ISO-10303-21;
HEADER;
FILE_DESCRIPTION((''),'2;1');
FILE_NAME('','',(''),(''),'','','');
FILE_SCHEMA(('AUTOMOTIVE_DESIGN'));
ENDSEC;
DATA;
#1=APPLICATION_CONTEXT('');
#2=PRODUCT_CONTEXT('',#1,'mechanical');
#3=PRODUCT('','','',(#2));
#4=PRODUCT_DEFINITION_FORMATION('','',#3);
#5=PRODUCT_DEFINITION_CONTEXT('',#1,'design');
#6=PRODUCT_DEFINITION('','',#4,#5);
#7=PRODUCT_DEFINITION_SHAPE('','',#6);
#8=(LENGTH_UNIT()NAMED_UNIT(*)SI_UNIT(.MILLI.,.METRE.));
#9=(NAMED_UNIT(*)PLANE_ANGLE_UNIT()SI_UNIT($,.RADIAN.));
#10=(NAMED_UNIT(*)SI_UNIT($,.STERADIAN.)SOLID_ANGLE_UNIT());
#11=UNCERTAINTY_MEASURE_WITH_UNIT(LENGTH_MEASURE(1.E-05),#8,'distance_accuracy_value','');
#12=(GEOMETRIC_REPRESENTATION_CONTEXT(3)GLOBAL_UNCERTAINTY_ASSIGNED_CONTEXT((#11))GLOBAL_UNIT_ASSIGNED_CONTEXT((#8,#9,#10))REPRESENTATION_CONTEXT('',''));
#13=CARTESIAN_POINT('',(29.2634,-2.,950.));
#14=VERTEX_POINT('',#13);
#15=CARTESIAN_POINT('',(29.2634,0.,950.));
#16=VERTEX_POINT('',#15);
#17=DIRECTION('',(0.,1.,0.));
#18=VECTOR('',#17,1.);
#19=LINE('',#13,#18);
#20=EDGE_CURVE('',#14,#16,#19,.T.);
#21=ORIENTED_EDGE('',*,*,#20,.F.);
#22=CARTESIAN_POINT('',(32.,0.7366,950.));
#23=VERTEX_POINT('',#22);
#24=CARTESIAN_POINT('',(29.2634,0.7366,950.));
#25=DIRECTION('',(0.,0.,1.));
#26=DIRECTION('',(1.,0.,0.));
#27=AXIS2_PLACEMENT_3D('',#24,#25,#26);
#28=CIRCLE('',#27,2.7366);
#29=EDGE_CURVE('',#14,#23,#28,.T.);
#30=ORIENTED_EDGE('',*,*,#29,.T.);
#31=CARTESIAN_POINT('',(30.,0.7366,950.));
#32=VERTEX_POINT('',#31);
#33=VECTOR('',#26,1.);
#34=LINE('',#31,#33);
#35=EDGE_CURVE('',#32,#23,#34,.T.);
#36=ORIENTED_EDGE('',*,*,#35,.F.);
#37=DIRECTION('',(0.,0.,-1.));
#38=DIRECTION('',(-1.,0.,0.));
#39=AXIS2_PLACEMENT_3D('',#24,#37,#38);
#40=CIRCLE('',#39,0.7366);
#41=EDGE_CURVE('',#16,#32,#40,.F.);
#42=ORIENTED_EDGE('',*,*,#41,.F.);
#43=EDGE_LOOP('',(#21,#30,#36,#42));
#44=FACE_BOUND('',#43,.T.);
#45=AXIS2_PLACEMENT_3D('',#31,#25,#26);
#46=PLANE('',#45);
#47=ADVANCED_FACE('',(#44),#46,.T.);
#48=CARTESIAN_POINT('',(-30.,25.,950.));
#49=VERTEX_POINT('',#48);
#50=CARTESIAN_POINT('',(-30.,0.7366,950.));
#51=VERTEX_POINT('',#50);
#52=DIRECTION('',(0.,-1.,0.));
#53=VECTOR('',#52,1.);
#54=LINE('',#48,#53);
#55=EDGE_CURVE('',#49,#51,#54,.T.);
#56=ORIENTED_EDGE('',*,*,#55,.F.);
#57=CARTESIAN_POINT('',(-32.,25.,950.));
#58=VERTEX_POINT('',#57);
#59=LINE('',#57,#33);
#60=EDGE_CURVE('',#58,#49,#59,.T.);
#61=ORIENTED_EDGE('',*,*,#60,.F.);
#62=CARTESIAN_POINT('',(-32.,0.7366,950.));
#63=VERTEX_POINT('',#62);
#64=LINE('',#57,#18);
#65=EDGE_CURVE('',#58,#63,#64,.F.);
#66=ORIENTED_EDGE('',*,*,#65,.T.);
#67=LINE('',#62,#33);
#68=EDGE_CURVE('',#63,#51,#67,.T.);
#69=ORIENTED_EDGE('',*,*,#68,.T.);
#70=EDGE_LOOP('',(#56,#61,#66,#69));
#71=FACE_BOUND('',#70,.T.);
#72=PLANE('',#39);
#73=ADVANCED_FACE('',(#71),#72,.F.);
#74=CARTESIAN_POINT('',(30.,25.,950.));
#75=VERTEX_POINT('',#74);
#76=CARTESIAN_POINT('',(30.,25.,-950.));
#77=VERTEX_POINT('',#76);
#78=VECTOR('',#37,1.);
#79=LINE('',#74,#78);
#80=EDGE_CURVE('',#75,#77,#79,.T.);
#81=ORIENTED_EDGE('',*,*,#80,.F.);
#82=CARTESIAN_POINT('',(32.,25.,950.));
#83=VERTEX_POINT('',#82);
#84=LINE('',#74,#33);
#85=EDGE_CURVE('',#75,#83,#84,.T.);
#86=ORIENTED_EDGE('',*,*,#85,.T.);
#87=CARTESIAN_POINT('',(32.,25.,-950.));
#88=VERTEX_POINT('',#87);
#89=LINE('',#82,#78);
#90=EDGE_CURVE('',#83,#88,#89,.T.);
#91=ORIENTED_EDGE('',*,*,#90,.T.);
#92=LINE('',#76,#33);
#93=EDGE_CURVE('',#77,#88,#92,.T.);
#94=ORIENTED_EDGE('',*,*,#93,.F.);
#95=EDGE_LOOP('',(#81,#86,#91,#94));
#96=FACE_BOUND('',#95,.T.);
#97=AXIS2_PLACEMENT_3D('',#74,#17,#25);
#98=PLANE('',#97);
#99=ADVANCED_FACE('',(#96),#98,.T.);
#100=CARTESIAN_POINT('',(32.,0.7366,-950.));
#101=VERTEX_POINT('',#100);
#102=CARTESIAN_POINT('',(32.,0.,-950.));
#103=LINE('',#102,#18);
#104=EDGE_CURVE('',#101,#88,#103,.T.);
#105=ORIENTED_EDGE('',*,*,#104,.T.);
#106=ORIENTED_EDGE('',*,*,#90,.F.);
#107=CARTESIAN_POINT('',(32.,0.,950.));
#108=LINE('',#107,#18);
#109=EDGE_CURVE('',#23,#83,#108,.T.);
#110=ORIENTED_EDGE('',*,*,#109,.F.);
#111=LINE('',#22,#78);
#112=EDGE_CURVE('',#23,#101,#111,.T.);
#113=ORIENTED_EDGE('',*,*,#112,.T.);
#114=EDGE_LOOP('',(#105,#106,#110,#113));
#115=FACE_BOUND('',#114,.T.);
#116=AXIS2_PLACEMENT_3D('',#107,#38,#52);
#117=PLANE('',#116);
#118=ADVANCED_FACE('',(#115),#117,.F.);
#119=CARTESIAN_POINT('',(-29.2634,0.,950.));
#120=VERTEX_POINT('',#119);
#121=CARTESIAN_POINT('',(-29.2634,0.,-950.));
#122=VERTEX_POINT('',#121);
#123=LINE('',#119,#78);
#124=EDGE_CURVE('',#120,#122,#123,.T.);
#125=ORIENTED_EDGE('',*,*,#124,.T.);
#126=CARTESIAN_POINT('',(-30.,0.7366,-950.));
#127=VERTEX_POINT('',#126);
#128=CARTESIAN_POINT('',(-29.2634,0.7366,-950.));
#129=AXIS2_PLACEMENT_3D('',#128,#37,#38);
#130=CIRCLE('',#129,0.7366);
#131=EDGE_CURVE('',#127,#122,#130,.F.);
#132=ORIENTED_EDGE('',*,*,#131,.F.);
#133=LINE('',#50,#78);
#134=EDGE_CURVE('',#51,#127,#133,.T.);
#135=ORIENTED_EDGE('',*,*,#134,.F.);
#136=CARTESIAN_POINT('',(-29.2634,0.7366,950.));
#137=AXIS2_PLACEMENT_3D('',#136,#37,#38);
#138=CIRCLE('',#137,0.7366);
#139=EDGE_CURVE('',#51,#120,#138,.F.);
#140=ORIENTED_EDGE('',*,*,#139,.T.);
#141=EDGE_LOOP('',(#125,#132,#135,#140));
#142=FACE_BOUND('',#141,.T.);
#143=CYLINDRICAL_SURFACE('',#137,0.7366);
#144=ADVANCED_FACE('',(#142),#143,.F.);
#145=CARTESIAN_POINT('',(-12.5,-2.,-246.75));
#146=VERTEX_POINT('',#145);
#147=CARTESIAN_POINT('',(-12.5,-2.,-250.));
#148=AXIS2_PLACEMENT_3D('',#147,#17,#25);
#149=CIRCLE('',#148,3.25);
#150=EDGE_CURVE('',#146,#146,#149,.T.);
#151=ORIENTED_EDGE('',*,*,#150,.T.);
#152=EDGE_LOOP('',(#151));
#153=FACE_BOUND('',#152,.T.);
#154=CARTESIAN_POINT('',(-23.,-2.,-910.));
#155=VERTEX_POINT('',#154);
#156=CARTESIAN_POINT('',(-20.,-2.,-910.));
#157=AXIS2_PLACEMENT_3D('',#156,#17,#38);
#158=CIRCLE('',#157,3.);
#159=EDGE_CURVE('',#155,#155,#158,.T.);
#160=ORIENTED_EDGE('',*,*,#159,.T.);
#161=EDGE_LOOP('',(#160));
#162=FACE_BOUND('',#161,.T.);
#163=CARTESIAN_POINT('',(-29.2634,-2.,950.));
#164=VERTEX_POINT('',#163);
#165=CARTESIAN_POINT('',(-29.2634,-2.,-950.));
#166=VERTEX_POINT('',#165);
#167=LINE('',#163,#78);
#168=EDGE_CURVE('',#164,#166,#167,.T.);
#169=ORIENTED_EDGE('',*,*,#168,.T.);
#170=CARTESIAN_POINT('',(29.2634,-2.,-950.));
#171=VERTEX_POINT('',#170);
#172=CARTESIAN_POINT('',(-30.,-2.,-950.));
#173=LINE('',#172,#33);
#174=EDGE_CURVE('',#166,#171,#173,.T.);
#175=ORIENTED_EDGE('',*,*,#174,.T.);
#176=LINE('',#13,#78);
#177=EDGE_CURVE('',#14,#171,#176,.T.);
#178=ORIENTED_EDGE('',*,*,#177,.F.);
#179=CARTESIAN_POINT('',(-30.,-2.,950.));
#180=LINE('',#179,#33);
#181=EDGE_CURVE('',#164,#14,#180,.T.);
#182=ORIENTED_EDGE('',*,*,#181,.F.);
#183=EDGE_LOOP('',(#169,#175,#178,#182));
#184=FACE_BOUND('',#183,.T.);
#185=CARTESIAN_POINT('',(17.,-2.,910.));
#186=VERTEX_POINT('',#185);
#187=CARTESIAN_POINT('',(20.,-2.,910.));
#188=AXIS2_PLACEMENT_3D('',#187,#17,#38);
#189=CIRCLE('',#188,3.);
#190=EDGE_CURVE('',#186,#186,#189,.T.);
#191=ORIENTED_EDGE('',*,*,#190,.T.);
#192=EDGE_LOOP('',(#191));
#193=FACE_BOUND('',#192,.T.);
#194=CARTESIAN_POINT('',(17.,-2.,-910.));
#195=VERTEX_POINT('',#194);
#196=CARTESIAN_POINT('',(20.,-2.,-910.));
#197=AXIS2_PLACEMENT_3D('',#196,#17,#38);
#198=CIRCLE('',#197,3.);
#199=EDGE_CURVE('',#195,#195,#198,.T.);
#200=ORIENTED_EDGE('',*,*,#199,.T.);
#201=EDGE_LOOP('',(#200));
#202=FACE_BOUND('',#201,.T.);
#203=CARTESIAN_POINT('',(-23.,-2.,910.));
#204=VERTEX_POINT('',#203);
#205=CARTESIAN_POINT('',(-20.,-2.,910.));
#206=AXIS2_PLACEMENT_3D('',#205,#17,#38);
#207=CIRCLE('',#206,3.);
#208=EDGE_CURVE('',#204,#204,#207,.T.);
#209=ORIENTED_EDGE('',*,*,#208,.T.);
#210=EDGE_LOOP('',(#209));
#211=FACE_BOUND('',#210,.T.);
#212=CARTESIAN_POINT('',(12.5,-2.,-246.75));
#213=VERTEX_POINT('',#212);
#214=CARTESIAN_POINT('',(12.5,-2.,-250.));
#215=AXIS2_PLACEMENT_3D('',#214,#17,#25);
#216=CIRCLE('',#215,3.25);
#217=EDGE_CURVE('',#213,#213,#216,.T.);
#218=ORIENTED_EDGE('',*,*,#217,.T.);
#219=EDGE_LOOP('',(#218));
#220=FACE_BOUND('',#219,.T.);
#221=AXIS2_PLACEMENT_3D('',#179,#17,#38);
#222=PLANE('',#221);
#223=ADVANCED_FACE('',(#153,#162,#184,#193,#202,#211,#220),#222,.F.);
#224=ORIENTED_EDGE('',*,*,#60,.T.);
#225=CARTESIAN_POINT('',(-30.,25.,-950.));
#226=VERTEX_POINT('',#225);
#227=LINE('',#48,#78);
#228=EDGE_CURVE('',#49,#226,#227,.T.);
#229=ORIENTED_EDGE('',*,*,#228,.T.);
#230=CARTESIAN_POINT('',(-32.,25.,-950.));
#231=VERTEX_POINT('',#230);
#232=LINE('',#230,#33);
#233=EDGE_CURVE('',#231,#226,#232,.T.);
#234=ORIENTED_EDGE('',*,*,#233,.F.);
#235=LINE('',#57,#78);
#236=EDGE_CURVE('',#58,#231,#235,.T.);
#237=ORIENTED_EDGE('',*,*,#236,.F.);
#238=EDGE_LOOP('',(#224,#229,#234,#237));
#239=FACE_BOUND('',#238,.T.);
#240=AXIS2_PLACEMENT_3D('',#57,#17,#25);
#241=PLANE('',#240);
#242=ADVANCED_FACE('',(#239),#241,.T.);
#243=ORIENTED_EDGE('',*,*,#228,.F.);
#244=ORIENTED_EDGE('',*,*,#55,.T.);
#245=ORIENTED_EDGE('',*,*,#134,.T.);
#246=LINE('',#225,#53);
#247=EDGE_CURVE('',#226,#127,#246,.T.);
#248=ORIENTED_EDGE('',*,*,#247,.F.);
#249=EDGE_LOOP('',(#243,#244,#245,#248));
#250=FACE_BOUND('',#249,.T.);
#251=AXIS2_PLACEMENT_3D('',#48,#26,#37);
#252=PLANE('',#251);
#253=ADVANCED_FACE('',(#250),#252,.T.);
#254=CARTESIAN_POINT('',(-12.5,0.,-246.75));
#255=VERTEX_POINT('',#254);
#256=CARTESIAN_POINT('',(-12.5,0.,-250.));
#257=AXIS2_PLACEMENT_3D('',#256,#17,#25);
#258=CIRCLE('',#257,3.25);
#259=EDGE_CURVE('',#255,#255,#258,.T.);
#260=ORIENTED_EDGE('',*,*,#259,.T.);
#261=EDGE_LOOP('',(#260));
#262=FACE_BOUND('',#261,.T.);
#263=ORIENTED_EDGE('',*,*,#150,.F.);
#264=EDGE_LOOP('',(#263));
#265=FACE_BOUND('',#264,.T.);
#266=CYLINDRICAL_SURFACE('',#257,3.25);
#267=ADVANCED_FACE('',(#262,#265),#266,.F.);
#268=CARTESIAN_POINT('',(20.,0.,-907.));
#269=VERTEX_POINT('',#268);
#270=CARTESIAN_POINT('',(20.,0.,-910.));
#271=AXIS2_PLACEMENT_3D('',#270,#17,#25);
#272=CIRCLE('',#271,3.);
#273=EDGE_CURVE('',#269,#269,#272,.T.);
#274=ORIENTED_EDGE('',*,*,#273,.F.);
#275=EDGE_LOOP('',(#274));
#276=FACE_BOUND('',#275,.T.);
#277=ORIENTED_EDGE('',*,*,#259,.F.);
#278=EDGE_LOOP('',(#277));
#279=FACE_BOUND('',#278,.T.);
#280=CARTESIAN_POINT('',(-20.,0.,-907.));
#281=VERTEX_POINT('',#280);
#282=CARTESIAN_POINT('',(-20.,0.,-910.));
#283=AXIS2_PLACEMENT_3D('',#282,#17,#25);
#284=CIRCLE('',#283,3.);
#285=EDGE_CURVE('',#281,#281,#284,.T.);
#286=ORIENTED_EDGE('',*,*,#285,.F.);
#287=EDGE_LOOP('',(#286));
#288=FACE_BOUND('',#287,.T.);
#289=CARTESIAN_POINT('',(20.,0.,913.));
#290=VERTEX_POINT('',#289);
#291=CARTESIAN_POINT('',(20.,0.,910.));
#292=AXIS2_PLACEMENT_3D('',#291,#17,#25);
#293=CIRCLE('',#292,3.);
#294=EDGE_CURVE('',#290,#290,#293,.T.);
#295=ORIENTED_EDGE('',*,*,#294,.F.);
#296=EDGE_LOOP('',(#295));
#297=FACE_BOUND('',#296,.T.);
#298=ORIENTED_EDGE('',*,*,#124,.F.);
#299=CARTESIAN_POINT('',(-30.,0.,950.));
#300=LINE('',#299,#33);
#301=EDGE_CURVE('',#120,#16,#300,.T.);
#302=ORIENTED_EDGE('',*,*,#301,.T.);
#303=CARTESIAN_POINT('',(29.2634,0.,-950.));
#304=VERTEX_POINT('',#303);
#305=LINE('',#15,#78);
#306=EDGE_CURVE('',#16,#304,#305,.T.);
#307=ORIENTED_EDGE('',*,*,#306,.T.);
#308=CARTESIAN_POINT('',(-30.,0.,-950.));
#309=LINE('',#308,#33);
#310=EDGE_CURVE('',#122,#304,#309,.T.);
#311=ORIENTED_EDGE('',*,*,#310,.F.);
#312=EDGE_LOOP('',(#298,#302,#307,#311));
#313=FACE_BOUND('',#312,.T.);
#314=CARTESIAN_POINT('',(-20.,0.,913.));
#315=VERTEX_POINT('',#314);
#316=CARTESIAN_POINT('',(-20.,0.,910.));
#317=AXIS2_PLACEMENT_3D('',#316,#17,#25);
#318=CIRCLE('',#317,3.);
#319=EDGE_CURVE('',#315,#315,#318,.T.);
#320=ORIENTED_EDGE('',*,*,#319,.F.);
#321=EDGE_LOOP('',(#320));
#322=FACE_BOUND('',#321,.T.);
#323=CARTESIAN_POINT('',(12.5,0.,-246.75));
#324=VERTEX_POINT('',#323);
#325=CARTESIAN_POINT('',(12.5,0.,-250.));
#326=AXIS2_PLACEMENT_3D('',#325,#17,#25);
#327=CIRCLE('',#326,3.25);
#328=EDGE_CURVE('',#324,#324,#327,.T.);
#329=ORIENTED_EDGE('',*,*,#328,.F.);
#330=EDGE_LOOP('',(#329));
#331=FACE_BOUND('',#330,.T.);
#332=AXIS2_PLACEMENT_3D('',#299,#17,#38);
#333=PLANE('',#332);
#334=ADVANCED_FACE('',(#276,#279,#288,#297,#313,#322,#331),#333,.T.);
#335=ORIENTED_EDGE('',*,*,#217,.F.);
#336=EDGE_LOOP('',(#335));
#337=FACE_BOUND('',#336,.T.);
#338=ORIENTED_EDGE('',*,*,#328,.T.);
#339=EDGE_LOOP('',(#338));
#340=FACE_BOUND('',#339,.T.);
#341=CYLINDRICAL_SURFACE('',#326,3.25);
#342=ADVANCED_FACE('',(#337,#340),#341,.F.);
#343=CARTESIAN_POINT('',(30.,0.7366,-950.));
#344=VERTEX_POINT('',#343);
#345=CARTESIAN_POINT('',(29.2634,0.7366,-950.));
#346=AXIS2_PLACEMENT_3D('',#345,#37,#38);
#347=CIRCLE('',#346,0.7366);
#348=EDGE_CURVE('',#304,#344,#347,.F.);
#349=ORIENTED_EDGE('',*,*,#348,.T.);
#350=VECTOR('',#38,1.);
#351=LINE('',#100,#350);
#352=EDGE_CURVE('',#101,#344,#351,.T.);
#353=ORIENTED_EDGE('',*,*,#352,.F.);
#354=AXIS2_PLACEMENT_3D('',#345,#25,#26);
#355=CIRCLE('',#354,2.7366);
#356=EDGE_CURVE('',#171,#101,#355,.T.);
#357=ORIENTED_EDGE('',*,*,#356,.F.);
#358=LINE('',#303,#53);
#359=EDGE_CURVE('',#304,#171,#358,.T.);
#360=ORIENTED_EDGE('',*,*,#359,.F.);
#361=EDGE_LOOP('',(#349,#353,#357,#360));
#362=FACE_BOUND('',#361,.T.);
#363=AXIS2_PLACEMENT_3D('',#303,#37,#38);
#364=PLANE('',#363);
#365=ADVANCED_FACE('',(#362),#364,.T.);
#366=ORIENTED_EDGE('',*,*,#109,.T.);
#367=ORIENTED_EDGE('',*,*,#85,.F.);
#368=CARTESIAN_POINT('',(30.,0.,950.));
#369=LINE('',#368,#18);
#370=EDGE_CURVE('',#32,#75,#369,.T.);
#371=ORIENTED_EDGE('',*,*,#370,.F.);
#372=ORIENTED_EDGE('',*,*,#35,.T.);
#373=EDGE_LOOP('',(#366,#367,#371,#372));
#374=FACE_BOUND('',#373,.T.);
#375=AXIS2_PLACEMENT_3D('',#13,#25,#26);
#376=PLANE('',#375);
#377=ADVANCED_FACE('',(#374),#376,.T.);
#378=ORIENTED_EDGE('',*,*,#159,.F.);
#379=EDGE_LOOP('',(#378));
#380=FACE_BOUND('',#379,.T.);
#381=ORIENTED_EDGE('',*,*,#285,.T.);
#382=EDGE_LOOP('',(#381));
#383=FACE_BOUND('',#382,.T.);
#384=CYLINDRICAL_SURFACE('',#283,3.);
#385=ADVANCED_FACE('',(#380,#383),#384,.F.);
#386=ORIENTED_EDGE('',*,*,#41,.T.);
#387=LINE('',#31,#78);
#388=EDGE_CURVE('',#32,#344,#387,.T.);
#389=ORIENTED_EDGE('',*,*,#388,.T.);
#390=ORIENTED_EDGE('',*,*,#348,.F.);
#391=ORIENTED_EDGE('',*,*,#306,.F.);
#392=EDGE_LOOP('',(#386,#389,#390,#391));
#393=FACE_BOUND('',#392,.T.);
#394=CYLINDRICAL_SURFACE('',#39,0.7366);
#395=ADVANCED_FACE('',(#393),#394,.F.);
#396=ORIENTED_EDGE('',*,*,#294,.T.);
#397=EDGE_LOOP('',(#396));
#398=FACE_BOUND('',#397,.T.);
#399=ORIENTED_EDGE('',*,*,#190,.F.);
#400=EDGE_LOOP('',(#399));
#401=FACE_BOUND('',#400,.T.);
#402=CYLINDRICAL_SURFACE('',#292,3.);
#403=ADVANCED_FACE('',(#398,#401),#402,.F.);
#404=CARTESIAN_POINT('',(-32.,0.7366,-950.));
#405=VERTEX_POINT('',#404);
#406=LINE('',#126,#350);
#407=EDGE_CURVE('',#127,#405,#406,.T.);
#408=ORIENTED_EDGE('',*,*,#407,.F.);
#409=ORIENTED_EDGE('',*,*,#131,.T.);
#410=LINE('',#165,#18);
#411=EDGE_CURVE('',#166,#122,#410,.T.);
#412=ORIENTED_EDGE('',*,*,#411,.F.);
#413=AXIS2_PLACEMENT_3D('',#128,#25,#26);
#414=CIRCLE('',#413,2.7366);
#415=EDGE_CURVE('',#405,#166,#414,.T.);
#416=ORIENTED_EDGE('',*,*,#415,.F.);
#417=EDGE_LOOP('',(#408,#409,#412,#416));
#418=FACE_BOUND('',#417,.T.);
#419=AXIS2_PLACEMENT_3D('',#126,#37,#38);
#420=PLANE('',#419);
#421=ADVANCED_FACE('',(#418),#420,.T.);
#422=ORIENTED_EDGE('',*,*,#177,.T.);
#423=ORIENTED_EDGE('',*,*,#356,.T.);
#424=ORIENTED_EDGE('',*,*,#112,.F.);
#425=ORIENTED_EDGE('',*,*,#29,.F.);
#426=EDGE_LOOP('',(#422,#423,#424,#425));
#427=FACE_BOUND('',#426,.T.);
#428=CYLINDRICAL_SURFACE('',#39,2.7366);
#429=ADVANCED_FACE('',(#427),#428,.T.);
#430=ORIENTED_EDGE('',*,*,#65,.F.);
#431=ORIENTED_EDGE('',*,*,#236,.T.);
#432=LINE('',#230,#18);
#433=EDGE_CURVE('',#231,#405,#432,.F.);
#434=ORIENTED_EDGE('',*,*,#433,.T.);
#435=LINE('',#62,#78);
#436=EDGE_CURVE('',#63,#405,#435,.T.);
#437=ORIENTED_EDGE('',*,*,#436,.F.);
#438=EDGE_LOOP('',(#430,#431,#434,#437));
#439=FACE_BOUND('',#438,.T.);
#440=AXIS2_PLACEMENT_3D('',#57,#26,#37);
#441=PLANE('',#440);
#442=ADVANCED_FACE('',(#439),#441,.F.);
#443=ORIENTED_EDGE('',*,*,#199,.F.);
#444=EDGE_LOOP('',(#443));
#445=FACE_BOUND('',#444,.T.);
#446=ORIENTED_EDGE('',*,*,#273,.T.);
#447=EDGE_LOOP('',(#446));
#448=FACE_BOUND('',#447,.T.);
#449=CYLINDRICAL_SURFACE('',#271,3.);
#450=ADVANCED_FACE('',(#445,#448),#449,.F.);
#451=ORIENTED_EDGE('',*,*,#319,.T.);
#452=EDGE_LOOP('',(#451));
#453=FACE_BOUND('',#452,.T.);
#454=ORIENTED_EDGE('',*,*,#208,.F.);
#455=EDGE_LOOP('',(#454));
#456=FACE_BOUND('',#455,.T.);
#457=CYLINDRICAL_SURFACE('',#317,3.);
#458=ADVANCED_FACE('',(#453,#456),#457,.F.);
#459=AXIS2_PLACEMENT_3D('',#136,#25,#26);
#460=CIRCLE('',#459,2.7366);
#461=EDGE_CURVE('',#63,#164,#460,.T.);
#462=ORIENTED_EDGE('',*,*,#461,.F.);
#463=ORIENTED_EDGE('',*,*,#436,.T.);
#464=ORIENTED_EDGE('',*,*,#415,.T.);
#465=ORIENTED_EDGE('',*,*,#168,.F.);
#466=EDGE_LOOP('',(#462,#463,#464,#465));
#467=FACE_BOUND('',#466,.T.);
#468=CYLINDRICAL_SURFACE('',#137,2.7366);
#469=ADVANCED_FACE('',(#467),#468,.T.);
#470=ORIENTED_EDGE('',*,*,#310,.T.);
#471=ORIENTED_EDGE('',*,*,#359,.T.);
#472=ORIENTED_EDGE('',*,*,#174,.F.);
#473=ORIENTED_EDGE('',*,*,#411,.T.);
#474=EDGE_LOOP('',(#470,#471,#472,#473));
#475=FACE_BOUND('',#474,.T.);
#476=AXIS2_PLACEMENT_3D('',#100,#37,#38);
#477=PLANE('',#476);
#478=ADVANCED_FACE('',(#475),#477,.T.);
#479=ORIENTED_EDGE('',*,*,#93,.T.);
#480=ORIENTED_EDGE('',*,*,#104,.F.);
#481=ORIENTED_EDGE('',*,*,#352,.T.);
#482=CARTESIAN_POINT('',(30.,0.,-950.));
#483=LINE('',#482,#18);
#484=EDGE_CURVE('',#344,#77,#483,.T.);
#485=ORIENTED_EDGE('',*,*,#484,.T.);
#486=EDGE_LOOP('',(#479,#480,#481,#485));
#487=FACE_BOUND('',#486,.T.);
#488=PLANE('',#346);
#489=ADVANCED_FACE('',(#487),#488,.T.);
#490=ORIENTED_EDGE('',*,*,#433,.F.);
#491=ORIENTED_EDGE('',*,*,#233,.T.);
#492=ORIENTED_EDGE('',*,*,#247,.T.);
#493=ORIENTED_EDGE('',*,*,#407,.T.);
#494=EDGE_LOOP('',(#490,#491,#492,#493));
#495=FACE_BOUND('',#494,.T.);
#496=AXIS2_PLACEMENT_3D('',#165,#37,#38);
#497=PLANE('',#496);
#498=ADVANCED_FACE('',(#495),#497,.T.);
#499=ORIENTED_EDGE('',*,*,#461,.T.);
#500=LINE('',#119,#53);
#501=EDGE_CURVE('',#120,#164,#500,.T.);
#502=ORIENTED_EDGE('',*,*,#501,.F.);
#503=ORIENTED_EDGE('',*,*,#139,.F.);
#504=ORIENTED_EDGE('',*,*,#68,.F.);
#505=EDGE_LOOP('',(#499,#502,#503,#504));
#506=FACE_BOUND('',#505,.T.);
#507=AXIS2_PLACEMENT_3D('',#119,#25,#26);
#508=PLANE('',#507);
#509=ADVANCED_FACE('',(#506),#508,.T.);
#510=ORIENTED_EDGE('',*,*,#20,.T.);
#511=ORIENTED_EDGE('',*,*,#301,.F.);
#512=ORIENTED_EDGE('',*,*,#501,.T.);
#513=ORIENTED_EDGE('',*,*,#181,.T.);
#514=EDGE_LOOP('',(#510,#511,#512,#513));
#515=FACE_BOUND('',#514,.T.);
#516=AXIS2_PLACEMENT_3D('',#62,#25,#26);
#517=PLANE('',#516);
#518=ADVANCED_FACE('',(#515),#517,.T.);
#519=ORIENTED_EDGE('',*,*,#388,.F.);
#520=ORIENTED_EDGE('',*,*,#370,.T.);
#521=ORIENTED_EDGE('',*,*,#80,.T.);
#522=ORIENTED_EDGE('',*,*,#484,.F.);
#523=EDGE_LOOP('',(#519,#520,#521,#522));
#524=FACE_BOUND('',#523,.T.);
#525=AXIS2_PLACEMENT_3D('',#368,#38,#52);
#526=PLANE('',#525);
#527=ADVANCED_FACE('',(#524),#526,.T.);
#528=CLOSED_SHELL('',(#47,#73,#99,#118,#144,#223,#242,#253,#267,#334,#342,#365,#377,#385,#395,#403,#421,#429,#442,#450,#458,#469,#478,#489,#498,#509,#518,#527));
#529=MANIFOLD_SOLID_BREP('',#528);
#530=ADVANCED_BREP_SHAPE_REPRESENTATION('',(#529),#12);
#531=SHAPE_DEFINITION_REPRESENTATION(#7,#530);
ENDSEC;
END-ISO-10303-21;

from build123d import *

# Parameters (mm, degrees)
SM_BASE_FLANGE_1_DEPTH    = 950
HOLE_WIZARD_6_0_6_1_D     = 6
HOLE_WIZARD_6_0_6_1_DEPTH = 15
HOLE_WIZARD_6_0_6_1_TIP   = 1.802581857
HOLE_WIZARD_6_5_6_5_1_D   = 6.5


# Sheet-metal steps are written as plain solids
with BuildPart() as part:
    # Sketch 1 → 基体-法兰1 (new, symmetric)
    with BuildSketch(Plane.XY):
        with BuildLine():
            Line((-30, 25), (-30, 0.7366))
            ThreePointArc((-30, 0.7366), (-29.784254855, 0.215745145), (-29.2634, 0))
            Line((-29.2634, 0), (29.2634, 0))
            ThreePointArc((29.2634, 0), (29.784254855, 0.215745145), (30, 0.7366))
            Line((30, 0.7366), (30, 25))
            Line((30, 25), (32, 25))
            Line((32, 25), (32, 0.7366))
            ThreePointArc((32, 0.7366), (31.198468417, -1.198468417), (29.2634, -2))
            Line((29.2634, -2), (-29.2634, -2))
            ThreePointArc((-29.2634, -2), (-31.198468417, -1.198468417), (-32, 0.7366))
            Line((-32, 0.7366), (-32, 25))
            Line((-32, 25), (-30, 25))
        make_face()
    extrude(amount=SM_BASE_FLANGE_1_DEPTH, both=True)

    # Ø6.0 (6) 直径孔1
    with Locations(Plane(origin=(-20, 0, -910), x_dir=(1, 0, 0), z_dir=(0, 1, 0))):
        with Locations((0, 0), (40, 0), (0, -1820), (40, -1820)):
            Hole(HOLE_WIZARD_6_0_6_1_D / 2, depth=HOLE_WIZARD_6_0_6_1_DEPTH)
            with Locations((0, 0, -(HOLE_WIZARD_6_0_6_1_DEPTH + HOLE_WIZARD_6_0_6_1_TIP / 2))):  # 118° drill point
                Cone(0, HOLE_WIZARD_6_0_6_1_D / 2, HOLE_WIZARD_6_0_6_1_TIP, mode=Mode.SUBTRACT)

    # Ø6.5 (6.5) 直径孔1 (through all)
    with Locations(Plane(origin=(-12.5, 0, -250), x_dir=(1, 0, 0), z_dir=(0, 1, 0))):
        with Locations((0, 0), (25, 0)):
            Hole(HOLE_WIZARD_6_5_6_5_1_D / 2)


solid = part.part
